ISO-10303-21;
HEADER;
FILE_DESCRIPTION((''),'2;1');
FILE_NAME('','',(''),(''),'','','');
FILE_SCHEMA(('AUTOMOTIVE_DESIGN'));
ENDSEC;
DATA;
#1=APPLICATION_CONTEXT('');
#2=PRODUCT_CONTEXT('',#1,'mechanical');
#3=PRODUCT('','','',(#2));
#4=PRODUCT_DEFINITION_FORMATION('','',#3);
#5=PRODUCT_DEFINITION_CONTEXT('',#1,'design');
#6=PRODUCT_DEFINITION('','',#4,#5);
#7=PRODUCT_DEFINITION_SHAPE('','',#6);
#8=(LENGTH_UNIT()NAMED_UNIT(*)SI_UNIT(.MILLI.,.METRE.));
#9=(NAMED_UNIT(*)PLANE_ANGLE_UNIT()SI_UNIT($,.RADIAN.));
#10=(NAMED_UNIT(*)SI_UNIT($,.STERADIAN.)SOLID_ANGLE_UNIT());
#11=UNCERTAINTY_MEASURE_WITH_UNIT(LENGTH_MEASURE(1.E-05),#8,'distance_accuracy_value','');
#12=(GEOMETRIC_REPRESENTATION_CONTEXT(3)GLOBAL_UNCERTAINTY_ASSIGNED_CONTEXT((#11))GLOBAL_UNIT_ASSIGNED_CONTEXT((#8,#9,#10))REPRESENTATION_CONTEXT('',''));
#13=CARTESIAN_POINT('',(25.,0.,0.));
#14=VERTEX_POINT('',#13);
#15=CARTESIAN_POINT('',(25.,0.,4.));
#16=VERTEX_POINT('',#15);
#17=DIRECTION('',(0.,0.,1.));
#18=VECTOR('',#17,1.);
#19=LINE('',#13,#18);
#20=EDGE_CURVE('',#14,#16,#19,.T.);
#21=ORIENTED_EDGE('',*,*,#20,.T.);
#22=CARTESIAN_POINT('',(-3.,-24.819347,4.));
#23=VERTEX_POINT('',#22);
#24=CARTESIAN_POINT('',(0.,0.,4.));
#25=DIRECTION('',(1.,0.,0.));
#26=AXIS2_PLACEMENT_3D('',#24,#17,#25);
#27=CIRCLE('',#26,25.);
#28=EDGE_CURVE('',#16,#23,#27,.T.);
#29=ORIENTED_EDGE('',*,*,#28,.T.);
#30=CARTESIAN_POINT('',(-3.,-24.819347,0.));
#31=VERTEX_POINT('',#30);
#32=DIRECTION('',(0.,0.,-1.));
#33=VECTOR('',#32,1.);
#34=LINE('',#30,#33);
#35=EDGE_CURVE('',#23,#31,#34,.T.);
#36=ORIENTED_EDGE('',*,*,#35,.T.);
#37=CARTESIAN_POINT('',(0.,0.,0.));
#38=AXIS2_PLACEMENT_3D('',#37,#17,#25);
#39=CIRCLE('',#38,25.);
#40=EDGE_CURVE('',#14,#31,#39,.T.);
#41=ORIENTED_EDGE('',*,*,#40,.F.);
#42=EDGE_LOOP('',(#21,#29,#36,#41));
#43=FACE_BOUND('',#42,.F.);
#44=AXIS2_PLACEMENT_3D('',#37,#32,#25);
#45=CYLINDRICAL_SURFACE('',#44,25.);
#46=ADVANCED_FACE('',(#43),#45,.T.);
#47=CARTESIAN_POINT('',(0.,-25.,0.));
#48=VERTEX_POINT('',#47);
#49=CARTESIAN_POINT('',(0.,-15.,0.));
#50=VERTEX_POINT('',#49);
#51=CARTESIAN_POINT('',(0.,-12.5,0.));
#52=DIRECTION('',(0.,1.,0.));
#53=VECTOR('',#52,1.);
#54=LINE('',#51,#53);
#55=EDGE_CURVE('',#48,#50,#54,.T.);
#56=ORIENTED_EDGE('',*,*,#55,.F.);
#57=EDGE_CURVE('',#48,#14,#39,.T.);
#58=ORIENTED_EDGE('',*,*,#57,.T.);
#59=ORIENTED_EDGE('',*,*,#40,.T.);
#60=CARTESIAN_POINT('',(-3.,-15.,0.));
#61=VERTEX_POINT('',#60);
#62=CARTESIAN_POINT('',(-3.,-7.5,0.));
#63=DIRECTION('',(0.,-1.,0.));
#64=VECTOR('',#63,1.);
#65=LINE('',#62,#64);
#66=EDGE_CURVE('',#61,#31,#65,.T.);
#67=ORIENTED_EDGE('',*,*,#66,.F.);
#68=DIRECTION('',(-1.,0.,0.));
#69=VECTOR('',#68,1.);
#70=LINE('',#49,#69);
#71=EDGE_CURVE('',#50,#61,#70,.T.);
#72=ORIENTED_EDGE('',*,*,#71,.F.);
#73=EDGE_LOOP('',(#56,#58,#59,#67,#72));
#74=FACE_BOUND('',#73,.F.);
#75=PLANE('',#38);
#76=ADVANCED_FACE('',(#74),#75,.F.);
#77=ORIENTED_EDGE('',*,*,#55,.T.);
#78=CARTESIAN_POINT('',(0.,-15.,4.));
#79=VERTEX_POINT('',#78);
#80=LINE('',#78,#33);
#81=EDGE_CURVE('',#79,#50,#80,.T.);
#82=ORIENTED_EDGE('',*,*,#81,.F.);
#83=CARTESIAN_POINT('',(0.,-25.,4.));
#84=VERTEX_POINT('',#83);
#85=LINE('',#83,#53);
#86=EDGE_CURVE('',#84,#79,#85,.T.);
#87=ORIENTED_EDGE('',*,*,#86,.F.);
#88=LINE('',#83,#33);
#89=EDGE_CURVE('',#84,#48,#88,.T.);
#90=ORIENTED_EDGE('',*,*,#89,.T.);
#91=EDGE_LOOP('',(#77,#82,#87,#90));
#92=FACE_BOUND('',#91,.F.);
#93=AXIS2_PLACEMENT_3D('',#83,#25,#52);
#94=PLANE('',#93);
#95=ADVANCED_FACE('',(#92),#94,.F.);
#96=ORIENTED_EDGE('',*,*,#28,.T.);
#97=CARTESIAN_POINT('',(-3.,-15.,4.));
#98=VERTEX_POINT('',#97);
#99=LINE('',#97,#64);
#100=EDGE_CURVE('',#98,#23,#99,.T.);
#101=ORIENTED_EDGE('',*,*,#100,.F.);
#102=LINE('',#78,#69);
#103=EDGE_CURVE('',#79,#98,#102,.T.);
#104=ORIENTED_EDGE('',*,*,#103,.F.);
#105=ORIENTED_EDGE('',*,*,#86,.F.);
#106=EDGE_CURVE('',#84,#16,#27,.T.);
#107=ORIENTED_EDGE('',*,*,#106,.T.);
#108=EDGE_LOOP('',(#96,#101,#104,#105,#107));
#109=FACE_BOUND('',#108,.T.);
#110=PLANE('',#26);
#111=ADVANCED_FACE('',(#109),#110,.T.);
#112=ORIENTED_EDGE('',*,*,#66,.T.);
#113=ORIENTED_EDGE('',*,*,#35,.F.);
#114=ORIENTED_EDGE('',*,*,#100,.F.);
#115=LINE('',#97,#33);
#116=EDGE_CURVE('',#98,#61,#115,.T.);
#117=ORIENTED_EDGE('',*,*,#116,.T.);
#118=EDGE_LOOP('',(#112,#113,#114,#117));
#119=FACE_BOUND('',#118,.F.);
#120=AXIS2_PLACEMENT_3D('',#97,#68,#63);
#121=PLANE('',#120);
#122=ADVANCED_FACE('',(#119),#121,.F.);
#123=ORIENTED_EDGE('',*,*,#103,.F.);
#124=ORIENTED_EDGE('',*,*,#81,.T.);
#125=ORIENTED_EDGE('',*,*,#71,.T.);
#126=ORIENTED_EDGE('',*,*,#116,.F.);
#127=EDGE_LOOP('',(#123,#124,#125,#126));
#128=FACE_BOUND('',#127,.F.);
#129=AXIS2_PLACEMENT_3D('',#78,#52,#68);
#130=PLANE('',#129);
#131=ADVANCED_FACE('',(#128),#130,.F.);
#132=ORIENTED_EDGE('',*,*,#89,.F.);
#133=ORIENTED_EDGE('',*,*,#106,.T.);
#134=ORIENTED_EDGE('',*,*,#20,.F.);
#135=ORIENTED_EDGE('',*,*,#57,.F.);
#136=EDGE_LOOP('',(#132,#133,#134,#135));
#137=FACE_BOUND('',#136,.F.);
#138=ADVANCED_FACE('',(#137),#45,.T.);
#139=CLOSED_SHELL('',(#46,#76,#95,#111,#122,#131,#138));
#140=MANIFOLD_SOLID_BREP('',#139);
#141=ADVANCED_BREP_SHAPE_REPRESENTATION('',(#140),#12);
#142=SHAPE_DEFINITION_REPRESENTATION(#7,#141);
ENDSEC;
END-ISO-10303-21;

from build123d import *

# Parameters (mm, degrees)
F0_R     = 25
F1_DEPTH = 4
F3_DEPTH = 73


# Not quite as in the source:
# - an extrude ends at something that could not be found from the text; its depth is read off the source's solid


with BuildPart() as f1:
    # F0 (on Top) → F1 (new body)
    with BuildSketch(Plane.XY):
        Circle(F0_R)
    extrude(amount=F1_DEPTH)

    # F2 (on face) → F3 (cut, through all)
    with BuildSketch(Plane.XY.offset(4)):
        with BuildLine():
            Line((-3, -25), (0, -25))
            ThreePointArc((0, -25), (-1.5027171558, -24.9547959549), (-3, -24.819347292))
            Line((-3, -24.819347292), (-3, -25))
        make_face()
        with BuildLine():
            Line((0, -25), (0, -15))
            Line((0, -15), (-3, -15))
            Line((-3, -15), (-3, -24.819347292))
            ThreePointArc((-3, -24.819347292), (-1.5027171558, -24.9547959549), (0, -25))
        make_face()
    extrude(amount=-F3_DEPTH, mode=Mode.SUBTRACT)


solid = f1.part
